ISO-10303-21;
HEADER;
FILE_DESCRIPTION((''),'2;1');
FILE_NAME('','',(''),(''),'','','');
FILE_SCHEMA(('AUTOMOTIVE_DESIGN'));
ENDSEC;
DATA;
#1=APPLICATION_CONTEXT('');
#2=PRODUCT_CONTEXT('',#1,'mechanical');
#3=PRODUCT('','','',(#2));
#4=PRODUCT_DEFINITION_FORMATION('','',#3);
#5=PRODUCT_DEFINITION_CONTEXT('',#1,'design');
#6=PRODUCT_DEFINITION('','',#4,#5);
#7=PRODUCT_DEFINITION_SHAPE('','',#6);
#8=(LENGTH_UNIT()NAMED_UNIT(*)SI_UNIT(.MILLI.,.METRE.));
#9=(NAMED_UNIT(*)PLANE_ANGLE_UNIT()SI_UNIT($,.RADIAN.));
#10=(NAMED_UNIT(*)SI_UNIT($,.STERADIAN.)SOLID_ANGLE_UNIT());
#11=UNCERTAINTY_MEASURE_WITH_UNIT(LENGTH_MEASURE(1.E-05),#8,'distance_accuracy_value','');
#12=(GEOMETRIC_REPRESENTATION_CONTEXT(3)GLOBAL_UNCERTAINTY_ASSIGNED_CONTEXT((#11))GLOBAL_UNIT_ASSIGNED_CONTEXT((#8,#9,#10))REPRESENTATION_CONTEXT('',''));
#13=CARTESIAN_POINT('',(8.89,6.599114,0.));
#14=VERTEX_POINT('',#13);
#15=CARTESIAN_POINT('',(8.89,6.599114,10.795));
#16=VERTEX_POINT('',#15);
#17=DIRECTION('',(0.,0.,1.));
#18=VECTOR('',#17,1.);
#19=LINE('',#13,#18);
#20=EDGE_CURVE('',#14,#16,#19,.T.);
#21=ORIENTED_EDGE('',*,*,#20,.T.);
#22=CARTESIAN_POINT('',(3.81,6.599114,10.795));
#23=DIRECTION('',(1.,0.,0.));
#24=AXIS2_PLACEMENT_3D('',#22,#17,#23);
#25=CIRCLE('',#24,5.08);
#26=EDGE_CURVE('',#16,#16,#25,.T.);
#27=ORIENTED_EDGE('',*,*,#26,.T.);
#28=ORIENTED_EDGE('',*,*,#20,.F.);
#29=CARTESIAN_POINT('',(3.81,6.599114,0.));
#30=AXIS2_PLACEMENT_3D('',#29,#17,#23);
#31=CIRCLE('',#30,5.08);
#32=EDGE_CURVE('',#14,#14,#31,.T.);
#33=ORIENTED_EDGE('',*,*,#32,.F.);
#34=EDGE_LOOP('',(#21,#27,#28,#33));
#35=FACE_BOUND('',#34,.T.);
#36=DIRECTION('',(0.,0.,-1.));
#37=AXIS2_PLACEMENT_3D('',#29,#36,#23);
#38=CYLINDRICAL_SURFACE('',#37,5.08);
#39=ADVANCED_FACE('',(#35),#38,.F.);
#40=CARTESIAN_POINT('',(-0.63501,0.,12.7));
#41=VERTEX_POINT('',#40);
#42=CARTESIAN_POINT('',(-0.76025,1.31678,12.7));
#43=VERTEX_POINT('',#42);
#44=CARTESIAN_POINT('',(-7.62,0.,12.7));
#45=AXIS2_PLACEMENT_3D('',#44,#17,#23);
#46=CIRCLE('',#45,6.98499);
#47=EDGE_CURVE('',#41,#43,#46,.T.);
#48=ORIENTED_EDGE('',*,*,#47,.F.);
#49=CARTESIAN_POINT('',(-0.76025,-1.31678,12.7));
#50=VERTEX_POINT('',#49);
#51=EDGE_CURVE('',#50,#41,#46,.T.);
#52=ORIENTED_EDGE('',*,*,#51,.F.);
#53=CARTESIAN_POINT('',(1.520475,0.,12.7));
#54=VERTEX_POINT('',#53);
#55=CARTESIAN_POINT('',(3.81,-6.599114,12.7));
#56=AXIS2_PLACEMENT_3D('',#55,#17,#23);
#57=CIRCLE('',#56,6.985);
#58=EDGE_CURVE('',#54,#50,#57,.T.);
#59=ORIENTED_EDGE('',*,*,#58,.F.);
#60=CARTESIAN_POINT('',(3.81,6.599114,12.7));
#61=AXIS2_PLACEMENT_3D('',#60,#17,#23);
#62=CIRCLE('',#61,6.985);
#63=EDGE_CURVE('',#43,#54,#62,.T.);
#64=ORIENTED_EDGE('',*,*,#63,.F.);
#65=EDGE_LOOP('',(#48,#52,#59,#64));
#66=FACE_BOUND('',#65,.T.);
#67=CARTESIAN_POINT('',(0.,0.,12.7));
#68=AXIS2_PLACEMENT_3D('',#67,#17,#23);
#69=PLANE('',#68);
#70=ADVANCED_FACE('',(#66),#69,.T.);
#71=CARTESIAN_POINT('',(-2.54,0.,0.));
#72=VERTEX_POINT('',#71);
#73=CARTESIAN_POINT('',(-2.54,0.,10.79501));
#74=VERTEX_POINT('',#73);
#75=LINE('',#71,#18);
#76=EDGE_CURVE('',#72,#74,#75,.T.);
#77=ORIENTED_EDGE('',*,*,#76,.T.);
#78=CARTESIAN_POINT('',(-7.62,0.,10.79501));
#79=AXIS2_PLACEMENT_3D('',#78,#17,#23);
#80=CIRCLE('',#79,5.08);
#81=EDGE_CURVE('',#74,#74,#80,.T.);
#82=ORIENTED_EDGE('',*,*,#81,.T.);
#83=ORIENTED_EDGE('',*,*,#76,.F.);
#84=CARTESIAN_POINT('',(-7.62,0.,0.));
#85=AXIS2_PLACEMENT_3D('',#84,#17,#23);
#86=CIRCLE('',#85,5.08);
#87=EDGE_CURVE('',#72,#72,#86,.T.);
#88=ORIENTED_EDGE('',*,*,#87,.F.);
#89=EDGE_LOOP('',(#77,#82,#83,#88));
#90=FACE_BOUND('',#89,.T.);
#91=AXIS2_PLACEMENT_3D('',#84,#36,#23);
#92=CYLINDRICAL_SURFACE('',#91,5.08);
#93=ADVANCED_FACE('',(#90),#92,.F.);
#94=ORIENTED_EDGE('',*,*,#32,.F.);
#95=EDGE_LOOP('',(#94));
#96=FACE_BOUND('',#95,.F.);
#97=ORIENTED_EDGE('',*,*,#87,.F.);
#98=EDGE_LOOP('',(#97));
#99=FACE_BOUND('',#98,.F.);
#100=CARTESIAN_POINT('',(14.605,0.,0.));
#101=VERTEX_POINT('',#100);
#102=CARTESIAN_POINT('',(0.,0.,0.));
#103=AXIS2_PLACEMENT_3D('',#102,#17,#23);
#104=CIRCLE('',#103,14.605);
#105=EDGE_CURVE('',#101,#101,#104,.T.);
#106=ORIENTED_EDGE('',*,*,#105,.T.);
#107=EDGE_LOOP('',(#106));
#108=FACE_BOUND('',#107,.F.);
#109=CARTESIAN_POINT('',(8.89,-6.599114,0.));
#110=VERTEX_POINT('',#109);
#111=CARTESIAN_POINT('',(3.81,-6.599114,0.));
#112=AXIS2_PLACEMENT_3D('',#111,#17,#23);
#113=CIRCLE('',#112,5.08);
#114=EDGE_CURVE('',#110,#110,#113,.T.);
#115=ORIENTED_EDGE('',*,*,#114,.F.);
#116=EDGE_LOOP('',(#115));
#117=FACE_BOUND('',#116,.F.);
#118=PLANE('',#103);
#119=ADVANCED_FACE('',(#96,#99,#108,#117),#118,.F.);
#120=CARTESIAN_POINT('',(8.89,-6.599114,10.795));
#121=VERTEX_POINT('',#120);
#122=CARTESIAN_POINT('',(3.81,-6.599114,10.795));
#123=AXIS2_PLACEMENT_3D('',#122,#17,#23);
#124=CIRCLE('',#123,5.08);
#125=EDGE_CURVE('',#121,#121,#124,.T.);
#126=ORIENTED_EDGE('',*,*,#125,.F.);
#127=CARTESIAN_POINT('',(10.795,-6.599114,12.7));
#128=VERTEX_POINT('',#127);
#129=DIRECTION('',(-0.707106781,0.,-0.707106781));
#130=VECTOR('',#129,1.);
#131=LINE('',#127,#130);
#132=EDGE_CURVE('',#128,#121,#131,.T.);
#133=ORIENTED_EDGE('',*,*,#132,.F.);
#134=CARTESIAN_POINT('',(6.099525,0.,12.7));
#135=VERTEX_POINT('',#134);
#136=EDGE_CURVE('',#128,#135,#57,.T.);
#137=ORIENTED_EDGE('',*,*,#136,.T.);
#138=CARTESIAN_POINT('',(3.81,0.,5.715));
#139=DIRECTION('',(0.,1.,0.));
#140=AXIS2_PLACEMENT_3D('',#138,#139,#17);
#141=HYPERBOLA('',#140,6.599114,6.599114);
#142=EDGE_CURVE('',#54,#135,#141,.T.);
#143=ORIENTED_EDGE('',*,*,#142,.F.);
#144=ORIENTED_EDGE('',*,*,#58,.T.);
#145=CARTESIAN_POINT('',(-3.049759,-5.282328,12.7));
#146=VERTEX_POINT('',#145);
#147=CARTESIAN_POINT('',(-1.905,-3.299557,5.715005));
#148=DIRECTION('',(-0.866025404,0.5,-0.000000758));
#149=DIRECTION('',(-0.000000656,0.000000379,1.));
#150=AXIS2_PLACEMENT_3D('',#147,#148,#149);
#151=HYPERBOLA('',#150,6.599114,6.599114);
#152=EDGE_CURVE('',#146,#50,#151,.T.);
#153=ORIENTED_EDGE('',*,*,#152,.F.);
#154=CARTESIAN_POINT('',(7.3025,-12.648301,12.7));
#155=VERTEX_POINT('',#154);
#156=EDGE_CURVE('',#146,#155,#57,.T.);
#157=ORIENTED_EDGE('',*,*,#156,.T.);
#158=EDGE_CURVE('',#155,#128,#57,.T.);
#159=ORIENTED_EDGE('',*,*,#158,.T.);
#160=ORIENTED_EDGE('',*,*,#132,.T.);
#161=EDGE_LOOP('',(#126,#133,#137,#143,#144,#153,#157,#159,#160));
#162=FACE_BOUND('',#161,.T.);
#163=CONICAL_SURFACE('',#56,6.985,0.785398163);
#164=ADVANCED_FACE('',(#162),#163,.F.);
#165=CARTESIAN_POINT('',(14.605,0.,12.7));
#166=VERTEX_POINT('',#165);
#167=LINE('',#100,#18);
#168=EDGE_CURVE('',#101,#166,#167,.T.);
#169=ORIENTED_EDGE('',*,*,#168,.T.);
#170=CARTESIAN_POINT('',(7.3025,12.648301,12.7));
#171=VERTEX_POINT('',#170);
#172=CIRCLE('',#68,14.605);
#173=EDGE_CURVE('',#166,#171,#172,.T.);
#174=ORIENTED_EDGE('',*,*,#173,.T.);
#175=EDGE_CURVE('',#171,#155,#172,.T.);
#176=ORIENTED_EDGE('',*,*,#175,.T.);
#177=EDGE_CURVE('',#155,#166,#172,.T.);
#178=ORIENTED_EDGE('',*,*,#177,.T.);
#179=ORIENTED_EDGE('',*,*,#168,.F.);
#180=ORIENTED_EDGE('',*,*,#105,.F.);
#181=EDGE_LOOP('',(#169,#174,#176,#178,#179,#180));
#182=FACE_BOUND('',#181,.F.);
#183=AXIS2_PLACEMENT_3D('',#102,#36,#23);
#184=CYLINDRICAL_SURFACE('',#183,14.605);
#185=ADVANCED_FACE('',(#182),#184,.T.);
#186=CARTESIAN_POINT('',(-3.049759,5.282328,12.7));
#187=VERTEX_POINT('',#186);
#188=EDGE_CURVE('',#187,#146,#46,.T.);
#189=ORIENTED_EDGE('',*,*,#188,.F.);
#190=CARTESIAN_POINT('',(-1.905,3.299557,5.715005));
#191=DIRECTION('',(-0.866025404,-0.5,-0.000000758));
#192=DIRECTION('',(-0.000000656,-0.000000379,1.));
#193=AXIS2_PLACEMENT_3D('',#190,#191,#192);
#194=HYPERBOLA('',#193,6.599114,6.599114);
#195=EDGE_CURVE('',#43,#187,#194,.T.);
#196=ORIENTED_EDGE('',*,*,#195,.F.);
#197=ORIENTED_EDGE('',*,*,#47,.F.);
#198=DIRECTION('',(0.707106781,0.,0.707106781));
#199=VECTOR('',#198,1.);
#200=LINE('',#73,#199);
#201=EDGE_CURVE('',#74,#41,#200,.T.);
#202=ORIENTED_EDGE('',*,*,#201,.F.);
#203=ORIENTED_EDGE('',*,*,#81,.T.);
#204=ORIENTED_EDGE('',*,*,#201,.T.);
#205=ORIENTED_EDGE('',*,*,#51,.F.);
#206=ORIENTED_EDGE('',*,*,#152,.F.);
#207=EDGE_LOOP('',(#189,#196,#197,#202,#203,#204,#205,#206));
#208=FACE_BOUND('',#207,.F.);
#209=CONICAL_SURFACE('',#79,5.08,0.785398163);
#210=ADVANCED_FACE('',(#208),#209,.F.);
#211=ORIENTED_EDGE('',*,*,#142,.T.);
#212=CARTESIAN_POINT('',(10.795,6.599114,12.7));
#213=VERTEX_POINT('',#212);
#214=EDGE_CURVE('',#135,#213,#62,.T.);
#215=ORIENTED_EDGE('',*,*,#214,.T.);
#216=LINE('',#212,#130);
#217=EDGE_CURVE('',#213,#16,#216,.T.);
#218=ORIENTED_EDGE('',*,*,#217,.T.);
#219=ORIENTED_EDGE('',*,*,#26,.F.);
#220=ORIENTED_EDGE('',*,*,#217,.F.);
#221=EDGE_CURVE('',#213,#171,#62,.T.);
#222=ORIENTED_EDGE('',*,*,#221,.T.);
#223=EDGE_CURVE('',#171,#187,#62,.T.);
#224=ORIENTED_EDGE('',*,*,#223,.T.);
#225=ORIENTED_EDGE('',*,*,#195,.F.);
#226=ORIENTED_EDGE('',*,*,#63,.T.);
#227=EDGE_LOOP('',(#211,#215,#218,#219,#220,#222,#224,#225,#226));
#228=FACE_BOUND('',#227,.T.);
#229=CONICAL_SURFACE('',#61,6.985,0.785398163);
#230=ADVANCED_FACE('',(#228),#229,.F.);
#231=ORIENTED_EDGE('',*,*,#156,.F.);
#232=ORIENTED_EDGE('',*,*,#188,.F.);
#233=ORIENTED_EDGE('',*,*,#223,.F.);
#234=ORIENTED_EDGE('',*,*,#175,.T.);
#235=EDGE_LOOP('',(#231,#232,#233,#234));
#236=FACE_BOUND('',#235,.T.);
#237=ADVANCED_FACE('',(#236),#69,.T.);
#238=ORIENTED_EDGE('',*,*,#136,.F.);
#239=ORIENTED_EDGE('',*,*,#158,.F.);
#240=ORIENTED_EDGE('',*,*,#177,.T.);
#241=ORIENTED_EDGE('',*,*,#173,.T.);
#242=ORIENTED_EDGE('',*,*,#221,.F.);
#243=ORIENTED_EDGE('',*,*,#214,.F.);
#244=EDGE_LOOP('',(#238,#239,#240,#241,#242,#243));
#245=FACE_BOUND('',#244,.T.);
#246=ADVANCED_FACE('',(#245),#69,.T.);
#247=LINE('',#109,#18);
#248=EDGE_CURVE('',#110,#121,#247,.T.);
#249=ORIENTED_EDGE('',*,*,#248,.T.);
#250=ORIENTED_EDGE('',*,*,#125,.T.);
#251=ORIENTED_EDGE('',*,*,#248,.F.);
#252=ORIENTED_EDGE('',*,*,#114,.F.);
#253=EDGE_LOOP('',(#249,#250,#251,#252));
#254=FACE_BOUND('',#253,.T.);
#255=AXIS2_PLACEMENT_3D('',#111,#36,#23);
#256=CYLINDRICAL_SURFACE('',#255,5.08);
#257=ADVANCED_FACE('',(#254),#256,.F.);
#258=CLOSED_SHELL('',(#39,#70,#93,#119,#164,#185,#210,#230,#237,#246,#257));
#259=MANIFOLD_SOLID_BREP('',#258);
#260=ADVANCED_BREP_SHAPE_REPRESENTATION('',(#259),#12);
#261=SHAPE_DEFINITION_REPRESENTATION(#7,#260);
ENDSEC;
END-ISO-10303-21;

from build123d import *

# Parameters (mm, degrees)
F0_R     = 14.605
F0_R_2   = 5.08
F1_DEPTH = 12.7
F2_SIZE  = 1.90499


# Not quite as in the source:
# - a fillet or chamfer that OpenCascade refuses, or shapes differently, is made with other operations: its cross-section is extruded or revolved along the edge and cut away or added
# - a fillet or chamfer is up to 0.001 mm smaller than in the source, because OpenCascade refuses the exact size


with BuildPart() as f1:
    # F0 (on Top) → F1 (new body)
    with BuildSketch(Plane.XY):
        Circle(F0_R)
        with Locations((-7.62, 0)):
            Circle(F0_R_2, mode=Mode.SUBTRACT)
        with Locations((3.81, -6.5991135768)):
            Circle(F0_R_2, mode=Mode.SUBTRACT)
        with Locations((3.81, 6.5991135768)):
            Circle(F0_R_2, mode=Mode.SUBTRACT)
    extrude(amount=F1_DEPTH)

    # F2 (size 1.905 in the source; OpenCascade refuses exactly that, so slightly less here)
    f2_edges = [f1.edges().sort_by_distance(p)[0] for p in [
        (-12.7, 0, 12.7),
    ]]
    chamfer(f2_edges, length=F2_SIZE)

    # F3: chamfer of 1.905 on 1 edges, made by hand

    # F3_s1 → F3_t2 (revolve, cut)
    with BuildSketch(Plane.XZ.offset(-6.5991135768)):
        Polygon((10.795, 12.7), (8.89, 10.795), (8.89, 12.7), align=None)
    revolve(axis=Axis((3.81, 6.5991135768, 12.7), (0, 0, 1)), mode=Mode.SUBTRACT)

    # F4: chamfer of 1.905 on 1 edges, made by hand

    # F4_s1 → F4_t2 (revolve, cut)
    with BuildSketch(Plane.XZ.offset(6.5991135768)):
        Polygon((10.795, 12.7), (8.89, 10.795), (8.89, 12.7), align=None)
    revolve(axis=Axis((3.81, -6.5991135768, 12.7), (0, 0, 1)), mode=Mode.SUBTRACT)


solid = f1.part
